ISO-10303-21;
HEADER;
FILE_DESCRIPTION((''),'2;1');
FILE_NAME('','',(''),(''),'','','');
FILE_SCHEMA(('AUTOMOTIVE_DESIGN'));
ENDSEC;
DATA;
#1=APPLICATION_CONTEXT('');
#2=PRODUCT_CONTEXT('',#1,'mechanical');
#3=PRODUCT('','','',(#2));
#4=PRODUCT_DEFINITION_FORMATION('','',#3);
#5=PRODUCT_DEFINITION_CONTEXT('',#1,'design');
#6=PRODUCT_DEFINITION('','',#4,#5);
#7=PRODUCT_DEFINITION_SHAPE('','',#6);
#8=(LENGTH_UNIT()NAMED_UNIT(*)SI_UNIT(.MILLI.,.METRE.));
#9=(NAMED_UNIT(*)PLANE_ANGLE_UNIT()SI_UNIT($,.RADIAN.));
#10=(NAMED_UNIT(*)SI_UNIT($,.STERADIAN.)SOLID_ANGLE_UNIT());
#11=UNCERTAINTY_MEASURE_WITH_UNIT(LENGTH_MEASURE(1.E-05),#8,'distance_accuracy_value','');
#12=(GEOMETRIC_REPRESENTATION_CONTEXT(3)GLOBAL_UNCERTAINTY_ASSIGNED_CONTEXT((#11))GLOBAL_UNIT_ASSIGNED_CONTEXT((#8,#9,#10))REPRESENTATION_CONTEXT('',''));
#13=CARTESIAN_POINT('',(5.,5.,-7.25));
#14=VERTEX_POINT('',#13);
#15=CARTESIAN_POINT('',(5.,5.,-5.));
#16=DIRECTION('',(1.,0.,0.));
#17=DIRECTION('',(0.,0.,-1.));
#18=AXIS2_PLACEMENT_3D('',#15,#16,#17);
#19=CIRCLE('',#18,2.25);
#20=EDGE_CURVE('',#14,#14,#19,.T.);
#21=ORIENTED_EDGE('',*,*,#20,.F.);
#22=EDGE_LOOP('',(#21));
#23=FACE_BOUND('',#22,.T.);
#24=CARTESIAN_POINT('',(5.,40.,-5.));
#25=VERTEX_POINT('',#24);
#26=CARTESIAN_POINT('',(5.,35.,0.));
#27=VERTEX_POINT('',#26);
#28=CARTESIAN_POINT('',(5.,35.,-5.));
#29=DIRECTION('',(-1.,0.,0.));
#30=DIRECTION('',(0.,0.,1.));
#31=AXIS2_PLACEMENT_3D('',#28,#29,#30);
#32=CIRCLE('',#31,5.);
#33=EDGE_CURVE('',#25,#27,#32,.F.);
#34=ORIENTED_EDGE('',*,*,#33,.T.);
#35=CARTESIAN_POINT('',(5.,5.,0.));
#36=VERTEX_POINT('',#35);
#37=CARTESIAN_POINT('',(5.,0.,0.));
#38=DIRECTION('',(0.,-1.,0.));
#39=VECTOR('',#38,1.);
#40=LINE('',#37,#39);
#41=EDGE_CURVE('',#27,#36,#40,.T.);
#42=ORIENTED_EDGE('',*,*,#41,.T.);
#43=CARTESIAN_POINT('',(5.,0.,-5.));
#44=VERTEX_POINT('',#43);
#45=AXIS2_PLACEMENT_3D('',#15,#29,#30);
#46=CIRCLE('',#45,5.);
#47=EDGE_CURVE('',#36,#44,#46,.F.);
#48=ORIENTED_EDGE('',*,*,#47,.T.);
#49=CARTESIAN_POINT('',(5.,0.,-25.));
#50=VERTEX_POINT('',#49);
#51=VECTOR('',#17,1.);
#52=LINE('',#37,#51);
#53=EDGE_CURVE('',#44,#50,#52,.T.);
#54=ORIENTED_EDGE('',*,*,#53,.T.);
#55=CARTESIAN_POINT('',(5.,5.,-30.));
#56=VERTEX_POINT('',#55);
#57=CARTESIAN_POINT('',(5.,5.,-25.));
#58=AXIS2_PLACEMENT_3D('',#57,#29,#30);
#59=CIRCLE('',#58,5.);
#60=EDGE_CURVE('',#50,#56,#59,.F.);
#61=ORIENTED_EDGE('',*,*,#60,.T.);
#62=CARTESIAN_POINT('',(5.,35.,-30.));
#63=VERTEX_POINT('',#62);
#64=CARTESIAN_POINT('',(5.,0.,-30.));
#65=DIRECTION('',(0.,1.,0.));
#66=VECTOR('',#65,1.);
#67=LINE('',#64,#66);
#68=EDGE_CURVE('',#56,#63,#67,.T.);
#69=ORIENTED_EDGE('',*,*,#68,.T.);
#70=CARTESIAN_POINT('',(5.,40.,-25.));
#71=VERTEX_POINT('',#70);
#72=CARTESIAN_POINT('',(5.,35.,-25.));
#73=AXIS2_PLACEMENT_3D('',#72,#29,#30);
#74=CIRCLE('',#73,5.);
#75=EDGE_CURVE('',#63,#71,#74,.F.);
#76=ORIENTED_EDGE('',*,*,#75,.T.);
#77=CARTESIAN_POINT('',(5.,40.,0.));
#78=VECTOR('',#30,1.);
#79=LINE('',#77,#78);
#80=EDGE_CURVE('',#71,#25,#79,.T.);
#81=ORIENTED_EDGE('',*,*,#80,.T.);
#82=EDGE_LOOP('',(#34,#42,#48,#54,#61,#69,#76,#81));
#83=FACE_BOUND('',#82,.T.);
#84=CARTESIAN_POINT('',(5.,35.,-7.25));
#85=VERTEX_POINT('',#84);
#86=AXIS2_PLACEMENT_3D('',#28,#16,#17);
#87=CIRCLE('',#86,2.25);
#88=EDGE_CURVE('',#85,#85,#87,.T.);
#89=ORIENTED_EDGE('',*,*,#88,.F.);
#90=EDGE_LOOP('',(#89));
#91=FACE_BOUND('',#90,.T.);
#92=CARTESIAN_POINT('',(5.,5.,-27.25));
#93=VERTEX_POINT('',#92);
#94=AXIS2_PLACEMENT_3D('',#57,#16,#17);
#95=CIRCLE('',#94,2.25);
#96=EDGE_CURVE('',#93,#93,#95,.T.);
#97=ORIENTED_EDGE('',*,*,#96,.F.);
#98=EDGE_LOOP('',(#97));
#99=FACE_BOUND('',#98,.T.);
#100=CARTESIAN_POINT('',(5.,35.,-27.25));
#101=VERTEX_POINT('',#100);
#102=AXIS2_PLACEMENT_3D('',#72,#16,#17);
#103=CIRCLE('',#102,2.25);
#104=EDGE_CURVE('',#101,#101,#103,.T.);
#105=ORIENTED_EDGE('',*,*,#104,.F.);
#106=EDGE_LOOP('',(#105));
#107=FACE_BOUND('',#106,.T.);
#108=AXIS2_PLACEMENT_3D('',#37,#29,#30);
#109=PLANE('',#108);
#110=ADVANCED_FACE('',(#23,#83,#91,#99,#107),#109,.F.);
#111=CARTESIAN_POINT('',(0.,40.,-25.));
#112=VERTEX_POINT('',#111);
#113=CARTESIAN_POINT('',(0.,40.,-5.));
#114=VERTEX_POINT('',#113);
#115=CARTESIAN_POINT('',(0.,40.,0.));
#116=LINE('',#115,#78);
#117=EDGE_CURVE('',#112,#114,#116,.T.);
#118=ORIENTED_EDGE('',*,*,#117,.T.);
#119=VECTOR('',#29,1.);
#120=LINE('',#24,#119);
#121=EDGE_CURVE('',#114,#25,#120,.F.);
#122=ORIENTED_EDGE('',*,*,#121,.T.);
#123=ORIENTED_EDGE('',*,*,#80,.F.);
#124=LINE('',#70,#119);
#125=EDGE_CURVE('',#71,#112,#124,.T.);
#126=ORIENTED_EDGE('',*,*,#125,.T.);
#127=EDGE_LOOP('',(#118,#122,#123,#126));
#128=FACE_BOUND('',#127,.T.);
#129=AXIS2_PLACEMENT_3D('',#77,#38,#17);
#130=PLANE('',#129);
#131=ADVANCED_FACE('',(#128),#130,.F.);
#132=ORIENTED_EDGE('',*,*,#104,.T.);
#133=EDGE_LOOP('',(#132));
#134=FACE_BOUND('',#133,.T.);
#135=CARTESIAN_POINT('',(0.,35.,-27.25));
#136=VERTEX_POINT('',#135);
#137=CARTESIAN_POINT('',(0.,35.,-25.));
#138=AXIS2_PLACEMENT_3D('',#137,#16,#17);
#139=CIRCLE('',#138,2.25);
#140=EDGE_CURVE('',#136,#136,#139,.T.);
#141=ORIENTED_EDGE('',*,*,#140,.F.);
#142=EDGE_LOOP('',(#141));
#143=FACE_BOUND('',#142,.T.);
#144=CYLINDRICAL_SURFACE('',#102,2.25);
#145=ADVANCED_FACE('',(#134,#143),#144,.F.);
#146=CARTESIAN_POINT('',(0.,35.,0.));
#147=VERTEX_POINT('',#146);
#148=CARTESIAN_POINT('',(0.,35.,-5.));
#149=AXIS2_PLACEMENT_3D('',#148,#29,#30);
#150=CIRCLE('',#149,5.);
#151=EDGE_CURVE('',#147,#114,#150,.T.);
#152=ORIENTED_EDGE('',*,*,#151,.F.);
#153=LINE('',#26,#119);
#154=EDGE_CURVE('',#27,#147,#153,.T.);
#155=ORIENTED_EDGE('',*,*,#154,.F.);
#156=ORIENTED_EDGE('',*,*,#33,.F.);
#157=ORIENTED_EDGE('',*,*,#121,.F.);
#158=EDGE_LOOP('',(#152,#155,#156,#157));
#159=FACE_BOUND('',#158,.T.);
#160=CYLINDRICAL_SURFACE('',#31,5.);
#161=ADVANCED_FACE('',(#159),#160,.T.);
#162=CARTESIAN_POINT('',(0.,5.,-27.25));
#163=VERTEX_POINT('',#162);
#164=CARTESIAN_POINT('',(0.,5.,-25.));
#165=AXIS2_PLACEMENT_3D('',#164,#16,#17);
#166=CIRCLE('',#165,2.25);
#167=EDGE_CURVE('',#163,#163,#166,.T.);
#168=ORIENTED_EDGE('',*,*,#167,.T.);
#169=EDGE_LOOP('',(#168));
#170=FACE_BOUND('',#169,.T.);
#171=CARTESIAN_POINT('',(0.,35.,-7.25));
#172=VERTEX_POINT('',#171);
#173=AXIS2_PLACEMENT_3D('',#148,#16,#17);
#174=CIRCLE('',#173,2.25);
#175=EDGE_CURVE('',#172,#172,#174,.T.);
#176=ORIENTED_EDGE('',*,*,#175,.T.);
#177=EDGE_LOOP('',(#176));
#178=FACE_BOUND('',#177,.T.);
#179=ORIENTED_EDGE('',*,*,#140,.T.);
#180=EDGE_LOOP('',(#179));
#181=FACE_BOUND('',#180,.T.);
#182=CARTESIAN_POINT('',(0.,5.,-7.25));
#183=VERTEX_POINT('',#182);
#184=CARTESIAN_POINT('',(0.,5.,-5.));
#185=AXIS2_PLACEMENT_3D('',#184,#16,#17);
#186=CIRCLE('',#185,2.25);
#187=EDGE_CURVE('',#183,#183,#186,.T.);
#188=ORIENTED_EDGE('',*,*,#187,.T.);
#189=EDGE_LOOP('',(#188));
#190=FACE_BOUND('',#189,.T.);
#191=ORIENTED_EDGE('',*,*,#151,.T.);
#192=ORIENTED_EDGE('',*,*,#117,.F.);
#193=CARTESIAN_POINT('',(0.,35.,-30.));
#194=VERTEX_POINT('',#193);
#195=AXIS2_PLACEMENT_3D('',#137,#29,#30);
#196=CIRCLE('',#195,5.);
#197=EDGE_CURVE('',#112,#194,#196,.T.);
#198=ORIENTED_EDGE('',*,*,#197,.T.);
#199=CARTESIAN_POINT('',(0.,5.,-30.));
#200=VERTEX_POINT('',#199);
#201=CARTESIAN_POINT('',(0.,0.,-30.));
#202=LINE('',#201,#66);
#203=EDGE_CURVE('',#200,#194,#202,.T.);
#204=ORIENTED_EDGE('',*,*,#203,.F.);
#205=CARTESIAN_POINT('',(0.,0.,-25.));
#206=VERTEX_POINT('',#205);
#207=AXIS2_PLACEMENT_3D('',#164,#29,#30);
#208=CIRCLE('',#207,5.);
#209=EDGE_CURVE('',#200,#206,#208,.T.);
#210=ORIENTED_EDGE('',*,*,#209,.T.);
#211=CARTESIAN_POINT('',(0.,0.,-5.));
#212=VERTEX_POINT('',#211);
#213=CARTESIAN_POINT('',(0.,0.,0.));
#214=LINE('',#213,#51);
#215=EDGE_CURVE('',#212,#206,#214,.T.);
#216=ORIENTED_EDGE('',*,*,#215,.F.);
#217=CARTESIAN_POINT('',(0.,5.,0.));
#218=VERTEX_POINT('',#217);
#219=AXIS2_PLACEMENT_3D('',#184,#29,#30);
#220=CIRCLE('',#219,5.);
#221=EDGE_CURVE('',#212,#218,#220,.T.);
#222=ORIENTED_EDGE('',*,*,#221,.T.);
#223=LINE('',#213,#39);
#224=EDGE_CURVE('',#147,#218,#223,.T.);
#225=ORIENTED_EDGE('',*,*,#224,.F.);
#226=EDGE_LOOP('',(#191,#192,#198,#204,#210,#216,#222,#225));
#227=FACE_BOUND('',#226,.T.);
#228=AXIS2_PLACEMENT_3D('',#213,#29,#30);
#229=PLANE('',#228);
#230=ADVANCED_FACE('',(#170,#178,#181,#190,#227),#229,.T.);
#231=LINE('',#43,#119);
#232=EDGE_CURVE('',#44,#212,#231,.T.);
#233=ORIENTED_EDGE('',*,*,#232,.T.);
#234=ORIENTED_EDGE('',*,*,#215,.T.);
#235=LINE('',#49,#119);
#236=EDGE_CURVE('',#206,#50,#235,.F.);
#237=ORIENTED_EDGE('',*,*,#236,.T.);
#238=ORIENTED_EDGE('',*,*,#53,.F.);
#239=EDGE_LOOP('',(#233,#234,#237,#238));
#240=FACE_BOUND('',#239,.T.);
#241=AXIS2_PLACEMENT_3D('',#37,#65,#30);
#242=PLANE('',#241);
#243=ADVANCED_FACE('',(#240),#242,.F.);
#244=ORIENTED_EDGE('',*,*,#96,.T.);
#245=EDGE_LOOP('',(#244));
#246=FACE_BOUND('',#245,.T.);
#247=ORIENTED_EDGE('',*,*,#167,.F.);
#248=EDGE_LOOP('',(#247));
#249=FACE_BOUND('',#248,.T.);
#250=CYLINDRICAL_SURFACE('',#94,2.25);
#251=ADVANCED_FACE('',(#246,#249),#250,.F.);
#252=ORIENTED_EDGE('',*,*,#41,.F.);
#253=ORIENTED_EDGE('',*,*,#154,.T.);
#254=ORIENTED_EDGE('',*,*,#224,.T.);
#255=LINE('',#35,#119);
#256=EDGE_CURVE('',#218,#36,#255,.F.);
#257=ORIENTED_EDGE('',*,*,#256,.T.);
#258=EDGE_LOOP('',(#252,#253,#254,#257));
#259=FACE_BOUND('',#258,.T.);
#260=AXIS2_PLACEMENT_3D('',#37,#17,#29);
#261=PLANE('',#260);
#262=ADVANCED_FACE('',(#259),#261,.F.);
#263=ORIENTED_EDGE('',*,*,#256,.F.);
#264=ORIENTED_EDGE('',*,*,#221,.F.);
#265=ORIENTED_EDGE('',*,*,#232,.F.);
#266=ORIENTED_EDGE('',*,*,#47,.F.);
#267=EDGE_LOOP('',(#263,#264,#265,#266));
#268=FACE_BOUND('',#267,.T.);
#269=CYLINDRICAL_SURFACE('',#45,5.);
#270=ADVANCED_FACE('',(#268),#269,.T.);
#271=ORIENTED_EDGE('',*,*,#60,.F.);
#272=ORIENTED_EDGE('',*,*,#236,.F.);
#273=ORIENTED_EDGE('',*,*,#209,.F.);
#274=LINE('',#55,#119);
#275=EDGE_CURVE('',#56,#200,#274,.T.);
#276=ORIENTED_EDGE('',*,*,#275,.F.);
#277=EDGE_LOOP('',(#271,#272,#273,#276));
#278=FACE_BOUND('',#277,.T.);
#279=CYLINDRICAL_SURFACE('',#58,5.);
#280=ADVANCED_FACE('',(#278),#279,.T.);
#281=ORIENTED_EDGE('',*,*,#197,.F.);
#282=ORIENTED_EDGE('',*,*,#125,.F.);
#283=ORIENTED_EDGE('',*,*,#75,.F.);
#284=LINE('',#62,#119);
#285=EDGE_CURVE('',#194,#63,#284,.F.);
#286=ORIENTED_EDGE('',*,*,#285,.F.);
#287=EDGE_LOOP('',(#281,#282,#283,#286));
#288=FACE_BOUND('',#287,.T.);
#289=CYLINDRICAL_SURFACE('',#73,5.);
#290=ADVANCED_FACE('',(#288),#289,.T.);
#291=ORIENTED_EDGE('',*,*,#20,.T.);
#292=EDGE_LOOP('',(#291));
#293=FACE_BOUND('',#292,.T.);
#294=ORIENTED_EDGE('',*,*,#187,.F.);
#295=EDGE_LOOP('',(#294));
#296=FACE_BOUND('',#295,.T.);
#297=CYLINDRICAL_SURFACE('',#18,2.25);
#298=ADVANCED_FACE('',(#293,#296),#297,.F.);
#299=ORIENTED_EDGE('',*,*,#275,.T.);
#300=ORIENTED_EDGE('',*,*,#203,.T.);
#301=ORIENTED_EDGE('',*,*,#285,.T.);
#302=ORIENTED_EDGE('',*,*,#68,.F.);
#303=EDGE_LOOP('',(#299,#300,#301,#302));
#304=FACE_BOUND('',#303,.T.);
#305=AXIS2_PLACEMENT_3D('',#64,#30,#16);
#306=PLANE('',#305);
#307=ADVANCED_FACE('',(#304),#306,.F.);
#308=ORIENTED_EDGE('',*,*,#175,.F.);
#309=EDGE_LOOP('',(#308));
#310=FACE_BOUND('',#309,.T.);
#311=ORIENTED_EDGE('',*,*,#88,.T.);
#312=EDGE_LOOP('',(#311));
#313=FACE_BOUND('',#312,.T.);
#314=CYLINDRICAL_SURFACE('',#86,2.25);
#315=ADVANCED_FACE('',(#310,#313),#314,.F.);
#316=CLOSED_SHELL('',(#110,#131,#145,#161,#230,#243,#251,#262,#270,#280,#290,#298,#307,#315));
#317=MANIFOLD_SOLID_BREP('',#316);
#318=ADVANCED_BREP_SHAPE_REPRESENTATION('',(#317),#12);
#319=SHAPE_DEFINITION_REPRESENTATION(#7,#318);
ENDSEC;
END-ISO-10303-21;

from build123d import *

# Parameters (mm, degrees)
SKETCH_1_W                 = 30
SKETCH_1_H                 = 40
EXTRUDE_1_DEPTH            = 5
HOLE_WIZARD_M4_1_OUTLINE_R = 2.25
HOLE_WIZARD_M4_1_DEPTH     = 5
FILLET_1_R                 = 5


# Read off the part's stored shape, not the designer's step: M4 间隙孔1
with BuildPart() as part:
    # 草图1 → 凸台-拉伸1 (new body)
    with BuildSketch(Plane(origin=(0, 0, 0), x_dir=(0, 0, -1), z_dir=(1, 0, 0))):
        with Locations((15, 20)):
            Rectangle(SKETCH_1_W, SKETCH_1_H)
    extrude(amount=EXTRUDE_1_DEPTH)

    # M4 间隙孔1 outline → M4 间隙孔1 (cut)
    with BuildSketch(Plane.YZ):
        with Locations((35, -5)):
            Circle(HOLE_WIZARD_M4_1_OUTLINE_R)
        with Locations((5, -25)):
            Circle(HOLE_WIZARD_M4_1_OUTLINE_R)
        with Locations((5, -5)):
            Circle(HOLE_WIZARD_M4_1_OUTLINE_R)
        with Locations((35, -25)):
            Circle(HOLE_WIZARD_M4_1_OUTLINE_R)
    extrude(amount=HOLE_WIZARD_M4_1_DEPTH, mode=Mode.SUBTRACT)

    # 圆角1
    fillet_1_edges = [part.edges().sort_by_distance(p)[0] for p in [
        (2.5, 40, 0),
        (2.5, 40, -30),
        (2.5, 0, -30),
        (2.5, 0, 0),
    ]]
    fillet(fillet_1_edges, radius=FILLET_1_R)


solid = part.part
